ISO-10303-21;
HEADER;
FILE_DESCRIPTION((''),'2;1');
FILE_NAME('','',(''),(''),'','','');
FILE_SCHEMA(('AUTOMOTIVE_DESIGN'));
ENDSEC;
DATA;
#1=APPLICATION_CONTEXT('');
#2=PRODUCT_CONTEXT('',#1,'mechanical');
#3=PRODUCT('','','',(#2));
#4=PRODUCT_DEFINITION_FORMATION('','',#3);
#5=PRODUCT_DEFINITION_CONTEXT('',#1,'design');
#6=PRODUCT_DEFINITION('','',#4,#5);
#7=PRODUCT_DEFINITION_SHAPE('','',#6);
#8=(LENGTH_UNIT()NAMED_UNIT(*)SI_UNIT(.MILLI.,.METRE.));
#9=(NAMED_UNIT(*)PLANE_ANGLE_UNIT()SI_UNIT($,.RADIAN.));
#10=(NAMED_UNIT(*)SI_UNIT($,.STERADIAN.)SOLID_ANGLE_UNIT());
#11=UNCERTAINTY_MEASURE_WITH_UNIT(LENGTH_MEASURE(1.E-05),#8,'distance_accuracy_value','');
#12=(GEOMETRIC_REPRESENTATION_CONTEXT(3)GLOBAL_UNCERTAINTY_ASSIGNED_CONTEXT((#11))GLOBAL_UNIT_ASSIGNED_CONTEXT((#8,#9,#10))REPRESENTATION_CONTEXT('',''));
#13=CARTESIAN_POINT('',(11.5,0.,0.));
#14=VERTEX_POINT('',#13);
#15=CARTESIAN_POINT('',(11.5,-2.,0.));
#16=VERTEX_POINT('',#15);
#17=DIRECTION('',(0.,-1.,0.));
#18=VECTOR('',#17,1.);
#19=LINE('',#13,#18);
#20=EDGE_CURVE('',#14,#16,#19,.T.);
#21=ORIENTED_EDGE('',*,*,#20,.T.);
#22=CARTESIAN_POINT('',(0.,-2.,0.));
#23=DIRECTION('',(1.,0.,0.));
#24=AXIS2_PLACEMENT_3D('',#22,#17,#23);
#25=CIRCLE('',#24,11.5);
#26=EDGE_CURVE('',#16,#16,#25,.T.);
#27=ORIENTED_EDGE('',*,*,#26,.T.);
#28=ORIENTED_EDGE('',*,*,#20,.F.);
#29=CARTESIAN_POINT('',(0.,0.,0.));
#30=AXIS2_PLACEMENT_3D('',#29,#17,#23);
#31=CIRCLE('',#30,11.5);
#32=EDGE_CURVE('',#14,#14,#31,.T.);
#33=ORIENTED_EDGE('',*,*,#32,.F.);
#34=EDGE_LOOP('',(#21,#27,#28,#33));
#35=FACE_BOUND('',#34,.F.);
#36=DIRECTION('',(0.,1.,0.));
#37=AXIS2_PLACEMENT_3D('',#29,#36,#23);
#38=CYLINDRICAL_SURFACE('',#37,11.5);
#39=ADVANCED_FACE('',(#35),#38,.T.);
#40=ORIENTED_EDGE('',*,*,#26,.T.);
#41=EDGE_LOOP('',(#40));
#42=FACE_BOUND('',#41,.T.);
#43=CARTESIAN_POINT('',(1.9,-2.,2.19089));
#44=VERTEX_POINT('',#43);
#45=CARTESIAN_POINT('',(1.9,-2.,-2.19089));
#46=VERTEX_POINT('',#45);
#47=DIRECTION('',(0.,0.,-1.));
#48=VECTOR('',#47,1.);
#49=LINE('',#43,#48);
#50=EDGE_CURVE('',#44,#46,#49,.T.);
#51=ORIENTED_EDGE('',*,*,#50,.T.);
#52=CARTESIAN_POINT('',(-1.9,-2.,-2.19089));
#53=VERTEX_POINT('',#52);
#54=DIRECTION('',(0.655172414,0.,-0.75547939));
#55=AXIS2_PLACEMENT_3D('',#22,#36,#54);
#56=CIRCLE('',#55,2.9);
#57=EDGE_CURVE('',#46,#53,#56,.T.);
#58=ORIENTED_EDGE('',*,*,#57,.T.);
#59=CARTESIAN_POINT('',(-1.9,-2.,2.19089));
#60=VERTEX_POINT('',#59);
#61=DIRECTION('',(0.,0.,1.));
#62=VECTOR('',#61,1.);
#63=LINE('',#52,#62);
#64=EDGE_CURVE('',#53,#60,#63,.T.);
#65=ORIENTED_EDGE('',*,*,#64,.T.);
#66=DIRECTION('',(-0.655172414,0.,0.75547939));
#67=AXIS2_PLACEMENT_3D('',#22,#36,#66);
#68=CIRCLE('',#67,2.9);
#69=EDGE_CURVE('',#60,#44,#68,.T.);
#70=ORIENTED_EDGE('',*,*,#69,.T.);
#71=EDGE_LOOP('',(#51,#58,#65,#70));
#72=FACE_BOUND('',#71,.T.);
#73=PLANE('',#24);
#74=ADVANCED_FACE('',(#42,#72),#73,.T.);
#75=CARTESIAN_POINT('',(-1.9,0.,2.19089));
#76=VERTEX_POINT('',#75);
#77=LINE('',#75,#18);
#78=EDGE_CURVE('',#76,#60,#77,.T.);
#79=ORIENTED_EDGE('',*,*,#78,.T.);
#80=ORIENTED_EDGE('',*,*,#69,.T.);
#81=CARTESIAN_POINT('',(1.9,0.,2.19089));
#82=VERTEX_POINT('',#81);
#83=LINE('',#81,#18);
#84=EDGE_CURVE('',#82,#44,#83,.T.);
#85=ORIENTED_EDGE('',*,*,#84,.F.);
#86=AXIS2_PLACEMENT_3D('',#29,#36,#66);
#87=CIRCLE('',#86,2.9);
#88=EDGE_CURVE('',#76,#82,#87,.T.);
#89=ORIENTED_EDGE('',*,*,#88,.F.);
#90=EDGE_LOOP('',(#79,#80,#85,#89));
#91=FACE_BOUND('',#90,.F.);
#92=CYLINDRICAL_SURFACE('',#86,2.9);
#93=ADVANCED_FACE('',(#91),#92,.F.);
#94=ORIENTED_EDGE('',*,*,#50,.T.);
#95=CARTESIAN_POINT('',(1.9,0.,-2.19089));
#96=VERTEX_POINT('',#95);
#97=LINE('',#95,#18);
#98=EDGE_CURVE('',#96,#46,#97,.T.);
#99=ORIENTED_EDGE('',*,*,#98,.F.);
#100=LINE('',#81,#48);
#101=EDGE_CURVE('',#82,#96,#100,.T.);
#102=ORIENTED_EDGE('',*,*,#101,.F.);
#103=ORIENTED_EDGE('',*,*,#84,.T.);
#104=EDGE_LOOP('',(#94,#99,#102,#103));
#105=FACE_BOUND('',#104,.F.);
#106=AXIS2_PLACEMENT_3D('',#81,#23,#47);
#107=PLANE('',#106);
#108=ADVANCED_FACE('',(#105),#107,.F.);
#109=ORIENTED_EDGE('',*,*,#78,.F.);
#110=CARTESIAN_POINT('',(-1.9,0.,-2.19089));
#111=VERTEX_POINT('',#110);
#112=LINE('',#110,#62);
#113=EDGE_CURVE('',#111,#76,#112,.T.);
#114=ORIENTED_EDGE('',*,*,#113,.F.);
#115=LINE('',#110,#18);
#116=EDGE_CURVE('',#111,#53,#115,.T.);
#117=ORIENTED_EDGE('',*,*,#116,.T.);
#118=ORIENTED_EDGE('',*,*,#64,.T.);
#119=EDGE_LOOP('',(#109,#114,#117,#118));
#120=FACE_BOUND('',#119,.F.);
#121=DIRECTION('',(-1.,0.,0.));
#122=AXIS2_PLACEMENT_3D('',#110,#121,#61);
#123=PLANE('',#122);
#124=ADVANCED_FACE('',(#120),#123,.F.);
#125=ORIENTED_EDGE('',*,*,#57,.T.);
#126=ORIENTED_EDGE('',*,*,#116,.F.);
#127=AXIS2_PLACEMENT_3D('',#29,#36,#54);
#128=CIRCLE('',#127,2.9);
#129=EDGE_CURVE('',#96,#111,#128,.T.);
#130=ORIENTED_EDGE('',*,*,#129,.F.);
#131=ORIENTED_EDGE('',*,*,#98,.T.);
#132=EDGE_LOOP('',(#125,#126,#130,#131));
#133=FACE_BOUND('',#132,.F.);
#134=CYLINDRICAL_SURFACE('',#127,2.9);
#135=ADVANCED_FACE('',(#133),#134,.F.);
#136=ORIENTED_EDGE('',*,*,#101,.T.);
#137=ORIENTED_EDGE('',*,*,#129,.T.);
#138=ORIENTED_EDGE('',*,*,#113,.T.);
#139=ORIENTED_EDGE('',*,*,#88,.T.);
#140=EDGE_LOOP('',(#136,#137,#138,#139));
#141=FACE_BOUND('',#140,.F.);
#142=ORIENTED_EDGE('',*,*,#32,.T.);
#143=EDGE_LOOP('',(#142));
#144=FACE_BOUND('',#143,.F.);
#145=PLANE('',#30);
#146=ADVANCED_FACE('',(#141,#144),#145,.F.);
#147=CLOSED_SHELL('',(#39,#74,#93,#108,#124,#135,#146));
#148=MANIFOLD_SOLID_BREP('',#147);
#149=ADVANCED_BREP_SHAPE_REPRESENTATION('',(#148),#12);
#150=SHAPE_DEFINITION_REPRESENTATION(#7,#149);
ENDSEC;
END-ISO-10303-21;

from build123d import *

# Parameters (mm, degrees)
F1_DEPTH = 2
F0_R     = 11.5
F2_DEPTH = 2


# Not quite as in the source:
# - a feature names something its author has since deleted; it is built from what else it names


with BuildPart() as f1:
    # F0 (on Front) → F1 (new body)
    with BuildSketch(Plane.XZ):
        with BuildLine():
            Line((-1.9, -2.19089023), (-1.9, 2.19089023))
            ThreePointArc((-1.9, 2.19089023), (-2.9, 0), (-1.9, -2.19089023))
        make_face()
    extrude(amount=F1_DEPTH)



with BuildPart() as f1b:
    # F0 (on Front) → F1, piece 2 (new body)
    with BuildSketch(Plane.XZ):
        with BuildLine():
            ThreePointArc((1.9, -2.19089023), (2.6381811917, -1.2041594579), (2.9, 0))
            ThreePointArc((2.9, 0), (2.6381811917, 1.2041594579), (1.9, 2.19089023))
            Line((1.9, 2.19089023), (1.9, -2.19089023))
        make_face()
    extrude(amount=F1_DEPTH)


with BuildPart() as f1_1:
    add(f1.part)

    add(f1b.part)  # F2 merges F1b
    # F0 (on Front) → F2 (join)
    with BuildSketch(Plane.XZ):
        Circle(F0_R)
        with BuildLine():
            ThreePointArc((1.9, 2.19089023), (2.6381811917, 1.2041594579), (2.9, 0))
            ThreePointArc((2.9, 0), (2.6381811917, -1.2041594579), (1.9, -2.19089023))
            ThreePointArc((1.9, -2.19089023), (0, -2.9), (-1.9, -2.19089023))
            ThreePointArc((-1.9, -2.19089023), (-2.9, 0), (-1.9, 2.19089023))
            ThreePointArc((-1.9, 2.19089023), (0, 2.9), (1.9, 2.19089023))
        make_face(mode=Mode.SUBTRACT)
    extrude(amount=F2_DEPTH)


solid = f1_1.part
